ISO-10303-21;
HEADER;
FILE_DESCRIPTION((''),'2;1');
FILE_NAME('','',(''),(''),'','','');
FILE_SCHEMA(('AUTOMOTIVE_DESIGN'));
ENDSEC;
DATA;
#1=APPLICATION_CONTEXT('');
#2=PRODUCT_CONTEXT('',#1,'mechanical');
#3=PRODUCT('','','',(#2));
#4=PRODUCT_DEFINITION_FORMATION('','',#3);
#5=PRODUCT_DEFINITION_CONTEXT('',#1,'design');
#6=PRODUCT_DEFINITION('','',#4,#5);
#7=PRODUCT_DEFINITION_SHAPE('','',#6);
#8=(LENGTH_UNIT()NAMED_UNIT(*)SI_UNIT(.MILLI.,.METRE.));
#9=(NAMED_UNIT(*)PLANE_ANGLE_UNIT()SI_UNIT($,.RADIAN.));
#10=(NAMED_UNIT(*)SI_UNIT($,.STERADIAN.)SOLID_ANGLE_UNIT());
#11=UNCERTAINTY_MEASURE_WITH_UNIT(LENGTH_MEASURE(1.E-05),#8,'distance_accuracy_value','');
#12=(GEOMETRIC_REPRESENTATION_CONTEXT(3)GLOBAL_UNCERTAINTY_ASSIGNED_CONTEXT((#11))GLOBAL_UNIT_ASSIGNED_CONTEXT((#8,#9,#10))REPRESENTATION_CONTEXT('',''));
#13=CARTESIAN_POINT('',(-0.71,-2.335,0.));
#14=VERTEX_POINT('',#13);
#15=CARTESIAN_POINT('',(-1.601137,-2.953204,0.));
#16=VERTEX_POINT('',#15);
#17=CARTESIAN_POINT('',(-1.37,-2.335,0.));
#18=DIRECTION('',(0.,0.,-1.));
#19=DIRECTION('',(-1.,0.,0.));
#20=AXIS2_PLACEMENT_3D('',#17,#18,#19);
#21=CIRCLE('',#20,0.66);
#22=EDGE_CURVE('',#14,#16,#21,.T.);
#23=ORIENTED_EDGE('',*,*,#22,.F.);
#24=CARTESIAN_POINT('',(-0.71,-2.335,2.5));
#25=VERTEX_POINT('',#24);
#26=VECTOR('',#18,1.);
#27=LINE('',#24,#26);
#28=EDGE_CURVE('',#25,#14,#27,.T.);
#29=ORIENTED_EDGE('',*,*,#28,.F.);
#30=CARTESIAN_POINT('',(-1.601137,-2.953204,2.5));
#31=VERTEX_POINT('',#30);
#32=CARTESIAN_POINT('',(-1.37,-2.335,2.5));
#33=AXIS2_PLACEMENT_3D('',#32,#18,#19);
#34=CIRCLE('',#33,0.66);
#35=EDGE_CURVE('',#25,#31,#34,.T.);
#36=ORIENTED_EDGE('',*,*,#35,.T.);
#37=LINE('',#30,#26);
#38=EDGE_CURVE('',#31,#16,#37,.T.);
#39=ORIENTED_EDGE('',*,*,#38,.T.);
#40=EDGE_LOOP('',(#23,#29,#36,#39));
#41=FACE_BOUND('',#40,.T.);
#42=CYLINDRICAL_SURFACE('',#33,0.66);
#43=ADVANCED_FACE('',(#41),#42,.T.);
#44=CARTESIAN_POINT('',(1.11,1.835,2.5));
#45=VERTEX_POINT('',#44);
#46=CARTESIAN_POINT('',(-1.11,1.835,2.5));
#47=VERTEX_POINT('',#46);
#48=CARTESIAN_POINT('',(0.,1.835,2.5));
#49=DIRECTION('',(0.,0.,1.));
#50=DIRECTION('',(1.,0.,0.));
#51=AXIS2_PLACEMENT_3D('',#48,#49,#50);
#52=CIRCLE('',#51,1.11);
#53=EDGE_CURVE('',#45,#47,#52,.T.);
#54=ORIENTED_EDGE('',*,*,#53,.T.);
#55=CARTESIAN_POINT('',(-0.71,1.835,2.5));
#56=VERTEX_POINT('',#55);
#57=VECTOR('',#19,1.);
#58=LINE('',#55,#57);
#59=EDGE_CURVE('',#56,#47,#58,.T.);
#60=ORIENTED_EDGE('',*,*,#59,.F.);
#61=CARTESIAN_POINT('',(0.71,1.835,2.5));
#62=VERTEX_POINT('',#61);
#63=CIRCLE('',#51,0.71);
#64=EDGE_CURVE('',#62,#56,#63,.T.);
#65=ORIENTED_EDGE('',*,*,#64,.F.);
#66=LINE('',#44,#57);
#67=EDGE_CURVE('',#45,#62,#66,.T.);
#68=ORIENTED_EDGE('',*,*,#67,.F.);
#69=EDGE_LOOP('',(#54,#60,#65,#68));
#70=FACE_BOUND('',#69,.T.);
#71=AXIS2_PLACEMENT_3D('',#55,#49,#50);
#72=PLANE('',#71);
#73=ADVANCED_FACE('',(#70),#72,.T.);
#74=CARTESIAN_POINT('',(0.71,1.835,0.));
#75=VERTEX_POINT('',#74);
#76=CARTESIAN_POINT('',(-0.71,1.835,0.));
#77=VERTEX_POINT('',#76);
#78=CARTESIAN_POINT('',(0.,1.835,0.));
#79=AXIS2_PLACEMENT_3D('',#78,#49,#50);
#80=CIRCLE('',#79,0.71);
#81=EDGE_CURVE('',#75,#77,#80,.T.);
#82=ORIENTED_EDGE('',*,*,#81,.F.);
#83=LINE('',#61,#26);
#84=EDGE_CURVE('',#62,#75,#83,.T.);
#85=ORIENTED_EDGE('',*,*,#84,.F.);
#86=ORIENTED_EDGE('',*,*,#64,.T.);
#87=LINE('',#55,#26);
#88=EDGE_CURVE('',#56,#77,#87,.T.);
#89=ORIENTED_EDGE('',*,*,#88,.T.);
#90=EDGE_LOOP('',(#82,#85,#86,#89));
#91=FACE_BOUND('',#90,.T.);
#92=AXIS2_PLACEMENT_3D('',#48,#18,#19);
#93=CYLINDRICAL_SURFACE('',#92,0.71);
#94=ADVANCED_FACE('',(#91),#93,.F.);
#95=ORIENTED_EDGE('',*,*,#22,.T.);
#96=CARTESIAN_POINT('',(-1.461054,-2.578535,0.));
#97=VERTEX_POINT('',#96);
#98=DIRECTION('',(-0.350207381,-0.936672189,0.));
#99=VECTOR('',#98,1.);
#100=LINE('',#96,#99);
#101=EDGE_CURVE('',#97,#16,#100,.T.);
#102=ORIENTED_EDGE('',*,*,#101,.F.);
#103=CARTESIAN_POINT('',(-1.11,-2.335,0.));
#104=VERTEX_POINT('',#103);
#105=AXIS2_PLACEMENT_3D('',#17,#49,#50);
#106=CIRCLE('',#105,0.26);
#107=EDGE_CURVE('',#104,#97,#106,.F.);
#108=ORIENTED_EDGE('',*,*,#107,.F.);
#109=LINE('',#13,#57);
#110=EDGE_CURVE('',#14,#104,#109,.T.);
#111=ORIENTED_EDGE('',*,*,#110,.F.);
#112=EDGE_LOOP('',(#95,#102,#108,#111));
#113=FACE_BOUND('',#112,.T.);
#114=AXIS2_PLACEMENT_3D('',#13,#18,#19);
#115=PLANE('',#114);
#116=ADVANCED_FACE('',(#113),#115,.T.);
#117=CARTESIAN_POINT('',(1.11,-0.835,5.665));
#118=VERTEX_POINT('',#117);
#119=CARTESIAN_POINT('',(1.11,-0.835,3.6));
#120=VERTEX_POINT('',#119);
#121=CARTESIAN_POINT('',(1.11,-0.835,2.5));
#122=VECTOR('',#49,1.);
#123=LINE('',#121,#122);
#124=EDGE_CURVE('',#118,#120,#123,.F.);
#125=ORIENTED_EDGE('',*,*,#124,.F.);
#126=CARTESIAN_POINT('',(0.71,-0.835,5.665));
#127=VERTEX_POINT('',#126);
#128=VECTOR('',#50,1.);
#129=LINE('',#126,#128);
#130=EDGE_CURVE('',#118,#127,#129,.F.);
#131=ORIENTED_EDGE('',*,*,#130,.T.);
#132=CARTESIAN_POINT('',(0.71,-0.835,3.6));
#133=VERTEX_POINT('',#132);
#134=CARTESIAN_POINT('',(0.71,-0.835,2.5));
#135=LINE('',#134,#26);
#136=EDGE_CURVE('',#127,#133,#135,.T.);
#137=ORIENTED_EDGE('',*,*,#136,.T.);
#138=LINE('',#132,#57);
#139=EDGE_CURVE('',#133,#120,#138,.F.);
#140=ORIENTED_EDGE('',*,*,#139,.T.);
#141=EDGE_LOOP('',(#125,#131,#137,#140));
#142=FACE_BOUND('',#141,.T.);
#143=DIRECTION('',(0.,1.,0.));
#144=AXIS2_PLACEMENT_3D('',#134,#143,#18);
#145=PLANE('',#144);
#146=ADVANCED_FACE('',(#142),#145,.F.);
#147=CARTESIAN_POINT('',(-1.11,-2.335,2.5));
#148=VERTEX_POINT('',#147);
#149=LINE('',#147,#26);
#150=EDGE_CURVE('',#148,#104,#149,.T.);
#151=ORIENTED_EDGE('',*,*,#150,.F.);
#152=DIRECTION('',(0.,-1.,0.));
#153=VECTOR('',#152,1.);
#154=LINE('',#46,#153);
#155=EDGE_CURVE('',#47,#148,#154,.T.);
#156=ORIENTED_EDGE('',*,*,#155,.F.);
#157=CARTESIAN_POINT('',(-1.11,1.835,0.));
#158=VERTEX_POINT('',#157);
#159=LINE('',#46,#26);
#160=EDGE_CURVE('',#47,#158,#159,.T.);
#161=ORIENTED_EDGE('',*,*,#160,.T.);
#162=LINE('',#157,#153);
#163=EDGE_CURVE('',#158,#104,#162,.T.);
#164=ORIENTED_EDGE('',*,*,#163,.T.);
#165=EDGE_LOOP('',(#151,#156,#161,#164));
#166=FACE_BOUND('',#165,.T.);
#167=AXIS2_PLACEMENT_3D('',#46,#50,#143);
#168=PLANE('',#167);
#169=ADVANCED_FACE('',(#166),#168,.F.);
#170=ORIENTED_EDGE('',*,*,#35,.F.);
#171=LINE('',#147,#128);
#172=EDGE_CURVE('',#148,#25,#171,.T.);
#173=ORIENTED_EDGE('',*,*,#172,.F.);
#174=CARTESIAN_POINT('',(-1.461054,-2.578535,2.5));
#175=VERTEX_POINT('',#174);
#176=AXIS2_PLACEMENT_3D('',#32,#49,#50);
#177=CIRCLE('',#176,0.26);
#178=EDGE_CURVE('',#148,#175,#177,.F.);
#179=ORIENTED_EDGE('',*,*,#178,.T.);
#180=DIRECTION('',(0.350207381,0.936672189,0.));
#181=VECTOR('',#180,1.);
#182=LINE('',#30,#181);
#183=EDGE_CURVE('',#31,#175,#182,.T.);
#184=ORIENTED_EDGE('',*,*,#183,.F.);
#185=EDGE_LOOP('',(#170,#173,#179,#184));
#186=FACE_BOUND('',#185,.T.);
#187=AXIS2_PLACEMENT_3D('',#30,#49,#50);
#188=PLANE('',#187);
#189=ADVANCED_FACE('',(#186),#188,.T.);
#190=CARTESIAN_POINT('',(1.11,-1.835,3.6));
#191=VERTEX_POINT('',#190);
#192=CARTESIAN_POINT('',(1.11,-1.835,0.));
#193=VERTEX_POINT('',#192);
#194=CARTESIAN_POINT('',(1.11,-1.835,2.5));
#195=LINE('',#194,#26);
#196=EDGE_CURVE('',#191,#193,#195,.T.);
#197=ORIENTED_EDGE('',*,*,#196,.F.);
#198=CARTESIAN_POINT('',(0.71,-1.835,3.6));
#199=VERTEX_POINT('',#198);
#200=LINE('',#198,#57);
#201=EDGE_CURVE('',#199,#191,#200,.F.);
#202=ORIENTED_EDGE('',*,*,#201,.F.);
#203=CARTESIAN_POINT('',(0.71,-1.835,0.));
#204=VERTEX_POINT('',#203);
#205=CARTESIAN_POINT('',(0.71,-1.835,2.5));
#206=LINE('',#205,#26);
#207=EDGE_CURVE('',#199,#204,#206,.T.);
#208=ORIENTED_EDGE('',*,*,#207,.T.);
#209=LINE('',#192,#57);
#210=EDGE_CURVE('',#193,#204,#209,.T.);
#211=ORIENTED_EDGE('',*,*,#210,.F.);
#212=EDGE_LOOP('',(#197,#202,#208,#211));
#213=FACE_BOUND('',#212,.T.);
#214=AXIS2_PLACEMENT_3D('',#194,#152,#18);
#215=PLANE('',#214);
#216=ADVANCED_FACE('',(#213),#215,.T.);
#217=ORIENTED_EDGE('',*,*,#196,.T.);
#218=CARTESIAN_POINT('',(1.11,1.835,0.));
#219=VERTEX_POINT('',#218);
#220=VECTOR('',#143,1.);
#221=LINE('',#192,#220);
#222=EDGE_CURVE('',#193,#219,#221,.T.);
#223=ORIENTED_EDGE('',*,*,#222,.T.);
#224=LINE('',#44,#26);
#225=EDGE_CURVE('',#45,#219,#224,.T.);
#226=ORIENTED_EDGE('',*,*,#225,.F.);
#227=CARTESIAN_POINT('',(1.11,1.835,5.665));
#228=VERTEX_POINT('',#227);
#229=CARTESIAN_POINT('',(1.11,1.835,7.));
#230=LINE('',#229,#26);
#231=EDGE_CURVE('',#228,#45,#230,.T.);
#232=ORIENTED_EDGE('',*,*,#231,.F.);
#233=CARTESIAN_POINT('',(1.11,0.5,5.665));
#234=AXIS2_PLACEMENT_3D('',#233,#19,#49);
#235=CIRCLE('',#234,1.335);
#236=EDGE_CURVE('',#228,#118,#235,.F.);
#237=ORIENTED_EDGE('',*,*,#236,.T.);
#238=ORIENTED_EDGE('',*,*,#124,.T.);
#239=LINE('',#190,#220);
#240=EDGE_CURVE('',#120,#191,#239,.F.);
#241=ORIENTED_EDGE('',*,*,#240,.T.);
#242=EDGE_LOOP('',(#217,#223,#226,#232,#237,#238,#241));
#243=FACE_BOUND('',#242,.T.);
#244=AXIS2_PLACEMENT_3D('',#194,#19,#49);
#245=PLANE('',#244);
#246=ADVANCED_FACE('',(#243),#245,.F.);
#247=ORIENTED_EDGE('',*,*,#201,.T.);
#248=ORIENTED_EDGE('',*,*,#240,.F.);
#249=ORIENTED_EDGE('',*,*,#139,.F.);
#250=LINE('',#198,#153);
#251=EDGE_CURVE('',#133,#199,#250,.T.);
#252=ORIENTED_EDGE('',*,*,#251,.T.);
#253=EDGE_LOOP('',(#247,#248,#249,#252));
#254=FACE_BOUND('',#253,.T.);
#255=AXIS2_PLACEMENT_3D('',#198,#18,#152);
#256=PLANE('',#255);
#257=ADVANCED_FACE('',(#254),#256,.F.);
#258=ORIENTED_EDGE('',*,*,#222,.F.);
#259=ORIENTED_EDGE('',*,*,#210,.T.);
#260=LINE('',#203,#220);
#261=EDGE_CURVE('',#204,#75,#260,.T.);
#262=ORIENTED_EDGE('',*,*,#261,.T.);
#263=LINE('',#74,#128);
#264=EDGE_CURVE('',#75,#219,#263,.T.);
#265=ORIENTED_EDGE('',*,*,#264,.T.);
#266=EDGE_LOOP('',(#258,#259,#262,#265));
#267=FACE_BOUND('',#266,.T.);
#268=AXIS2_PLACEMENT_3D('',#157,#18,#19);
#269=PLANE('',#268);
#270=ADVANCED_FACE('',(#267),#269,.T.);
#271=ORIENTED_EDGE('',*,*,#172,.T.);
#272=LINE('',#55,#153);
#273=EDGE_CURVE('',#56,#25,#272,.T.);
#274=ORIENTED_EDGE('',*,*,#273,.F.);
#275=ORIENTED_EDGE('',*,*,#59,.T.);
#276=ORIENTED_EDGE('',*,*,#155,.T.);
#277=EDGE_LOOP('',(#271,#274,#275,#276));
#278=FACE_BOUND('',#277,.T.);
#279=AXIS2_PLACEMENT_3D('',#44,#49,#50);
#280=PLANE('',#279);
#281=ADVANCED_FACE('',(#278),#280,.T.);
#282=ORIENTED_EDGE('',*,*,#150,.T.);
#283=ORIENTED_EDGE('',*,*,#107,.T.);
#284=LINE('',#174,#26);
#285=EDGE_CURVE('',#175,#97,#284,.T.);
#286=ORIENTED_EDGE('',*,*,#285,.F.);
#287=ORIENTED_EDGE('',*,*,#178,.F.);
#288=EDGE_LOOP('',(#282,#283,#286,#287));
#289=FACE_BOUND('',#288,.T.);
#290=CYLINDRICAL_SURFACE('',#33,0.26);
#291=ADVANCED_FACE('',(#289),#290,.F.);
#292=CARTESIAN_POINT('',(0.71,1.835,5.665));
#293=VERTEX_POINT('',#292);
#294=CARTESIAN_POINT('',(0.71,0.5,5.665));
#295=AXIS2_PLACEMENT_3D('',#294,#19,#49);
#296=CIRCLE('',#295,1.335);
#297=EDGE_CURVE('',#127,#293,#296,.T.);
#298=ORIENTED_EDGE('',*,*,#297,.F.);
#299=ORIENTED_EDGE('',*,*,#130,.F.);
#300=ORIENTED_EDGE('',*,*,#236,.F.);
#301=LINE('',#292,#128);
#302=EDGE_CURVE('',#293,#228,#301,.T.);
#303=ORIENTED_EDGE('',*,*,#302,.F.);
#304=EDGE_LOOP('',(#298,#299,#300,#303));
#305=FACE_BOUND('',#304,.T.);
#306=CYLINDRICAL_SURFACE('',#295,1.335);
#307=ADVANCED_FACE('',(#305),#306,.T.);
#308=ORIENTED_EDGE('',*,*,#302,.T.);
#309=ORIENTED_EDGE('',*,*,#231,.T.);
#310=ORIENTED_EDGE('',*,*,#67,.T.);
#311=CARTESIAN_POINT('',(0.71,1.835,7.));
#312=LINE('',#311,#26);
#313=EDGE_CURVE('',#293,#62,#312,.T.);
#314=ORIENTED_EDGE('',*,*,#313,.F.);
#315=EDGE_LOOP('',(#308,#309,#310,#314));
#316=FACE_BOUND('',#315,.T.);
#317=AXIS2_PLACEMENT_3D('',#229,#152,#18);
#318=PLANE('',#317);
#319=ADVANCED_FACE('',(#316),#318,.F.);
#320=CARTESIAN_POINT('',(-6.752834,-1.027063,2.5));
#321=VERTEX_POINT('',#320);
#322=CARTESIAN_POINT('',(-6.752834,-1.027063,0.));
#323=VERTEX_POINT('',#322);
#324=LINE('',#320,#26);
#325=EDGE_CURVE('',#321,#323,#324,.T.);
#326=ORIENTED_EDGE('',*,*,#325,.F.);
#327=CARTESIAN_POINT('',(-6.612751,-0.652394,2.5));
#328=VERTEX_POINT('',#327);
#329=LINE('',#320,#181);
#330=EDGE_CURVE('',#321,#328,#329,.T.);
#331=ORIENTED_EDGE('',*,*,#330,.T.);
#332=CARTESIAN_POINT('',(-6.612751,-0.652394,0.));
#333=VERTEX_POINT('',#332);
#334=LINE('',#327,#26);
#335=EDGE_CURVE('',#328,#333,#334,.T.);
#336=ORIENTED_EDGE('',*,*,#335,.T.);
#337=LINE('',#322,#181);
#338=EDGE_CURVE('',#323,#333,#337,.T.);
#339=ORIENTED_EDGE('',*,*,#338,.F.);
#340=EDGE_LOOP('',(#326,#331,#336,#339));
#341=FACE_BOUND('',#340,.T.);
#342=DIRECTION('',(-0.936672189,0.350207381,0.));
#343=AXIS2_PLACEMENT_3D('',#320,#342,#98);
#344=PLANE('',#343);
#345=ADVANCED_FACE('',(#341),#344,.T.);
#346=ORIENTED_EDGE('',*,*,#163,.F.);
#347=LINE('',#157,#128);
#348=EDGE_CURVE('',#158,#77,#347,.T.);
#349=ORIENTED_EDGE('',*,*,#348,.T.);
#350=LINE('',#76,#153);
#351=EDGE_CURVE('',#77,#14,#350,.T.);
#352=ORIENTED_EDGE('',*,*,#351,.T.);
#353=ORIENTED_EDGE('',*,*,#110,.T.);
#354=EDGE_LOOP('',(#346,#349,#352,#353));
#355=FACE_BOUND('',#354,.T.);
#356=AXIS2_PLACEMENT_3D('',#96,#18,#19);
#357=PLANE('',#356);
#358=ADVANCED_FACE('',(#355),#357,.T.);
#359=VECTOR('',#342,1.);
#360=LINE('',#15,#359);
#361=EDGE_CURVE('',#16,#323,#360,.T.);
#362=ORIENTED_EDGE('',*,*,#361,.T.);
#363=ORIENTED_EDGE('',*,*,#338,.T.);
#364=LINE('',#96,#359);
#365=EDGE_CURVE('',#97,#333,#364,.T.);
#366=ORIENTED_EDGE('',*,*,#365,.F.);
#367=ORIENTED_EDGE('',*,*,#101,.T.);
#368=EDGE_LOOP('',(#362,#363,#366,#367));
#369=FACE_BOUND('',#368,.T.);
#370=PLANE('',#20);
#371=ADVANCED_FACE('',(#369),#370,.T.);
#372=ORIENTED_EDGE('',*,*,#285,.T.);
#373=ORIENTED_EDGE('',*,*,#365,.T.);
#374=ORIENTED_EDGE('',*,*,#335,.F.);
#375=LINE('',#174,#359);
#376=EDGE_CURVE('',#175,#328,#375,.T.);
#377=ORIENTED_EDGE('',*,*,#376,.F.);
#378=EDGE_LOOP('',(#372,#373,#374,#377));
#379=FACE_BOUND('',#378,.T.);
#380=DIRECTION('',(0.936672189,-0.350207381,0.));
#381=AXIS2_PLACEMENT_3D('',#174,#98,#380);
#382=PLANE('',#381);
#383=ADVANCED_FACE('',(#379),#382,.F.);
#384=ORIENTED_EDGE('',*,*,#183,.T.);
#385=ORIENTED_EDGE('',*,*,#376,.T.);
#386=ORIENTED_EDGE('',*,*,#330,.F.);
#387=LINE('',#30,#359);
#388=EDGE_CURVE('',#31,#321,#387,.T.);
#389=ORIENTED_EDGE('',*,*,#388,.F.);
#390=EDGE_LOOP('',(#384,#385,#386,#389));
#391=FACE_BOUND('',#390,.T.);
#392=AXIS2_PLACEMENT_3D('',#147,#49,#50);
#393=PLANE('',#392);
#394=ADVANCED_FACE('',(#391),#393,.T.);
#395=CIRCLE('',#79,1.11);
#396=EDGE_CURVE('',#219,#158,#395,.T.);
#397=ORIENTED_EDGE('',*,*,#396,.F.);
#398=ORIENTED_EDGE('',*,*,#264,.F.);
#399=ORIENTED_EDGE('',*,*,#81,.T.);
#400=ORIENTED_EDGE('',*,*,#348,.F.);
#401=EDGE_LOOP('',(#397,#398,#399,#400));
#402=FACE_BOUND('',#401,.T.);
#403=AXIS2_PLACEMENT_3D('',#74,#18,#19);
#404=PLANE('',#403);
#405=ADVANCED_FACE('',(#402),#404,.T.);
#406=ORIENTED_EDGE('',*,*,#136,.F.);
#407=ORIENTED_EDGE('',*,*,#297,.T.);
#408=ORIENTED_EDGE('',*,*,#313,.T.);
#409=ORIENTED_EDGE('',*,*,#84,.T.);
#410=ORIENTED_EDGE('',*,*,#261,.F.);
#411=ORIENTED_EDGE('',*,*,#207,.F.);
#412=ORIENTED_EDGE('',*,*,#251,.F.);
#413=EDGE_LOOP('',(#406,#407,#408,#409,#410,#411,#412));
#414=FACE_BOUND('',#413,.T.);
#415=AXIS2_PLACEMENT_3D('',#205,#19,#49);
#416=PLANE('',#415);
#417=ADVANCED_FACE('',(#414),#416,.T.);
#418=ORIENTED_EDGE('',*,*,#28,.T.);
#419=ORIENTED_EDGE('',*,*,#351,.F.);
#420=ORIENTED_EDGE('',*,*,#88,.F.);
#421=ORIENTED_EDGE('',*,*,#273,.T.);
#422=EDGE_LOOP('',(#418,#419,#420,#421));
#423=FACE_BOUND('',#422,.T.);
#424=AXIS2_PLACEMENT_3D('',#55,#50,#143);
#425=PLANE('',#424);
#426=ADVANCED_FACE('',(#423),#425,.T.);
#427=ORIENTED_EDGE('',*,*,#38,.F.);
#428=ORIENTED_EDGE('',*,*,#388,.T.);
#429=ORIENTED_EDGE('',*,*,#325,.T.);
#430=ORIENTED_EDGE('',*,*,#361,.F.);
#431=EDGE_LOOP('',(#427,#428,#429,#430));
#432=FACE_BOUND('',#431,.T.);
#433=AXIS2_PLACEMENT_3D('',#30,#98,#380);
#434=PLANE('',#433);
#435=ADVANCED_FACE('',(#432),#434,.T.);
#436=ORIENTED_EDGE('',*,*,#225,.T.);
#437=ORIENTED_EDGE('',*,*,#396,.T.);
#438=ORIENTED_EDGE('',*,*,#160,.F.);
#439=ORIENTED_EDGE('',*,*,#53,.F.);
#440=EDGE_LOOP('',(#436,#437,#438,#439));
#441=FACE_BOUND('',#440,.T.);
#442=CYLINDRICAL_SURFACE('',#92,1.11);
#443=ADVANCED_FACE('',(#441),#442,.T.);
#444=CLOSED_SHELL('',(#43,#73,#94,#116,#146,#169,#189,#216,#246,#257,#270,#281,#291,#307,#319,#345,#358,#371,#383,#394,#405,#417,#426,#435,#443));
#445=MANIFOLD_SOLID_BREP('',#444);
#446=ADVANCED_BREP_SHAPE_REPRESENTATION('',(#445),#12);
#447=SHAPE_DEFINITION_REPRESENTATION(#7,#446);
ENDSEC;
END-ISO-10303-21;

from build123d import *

# Parameters (mm, degrees)
BASE_FLANGE1_DEPTH  = 2.5
SKETCH8_W           = 0.4
SKETCH8_H           = 3.67
BOSS_EXTRUDE1_DEPTH = 4.5
SKETCH9_W           = 3.4
SKETCH9_H           = 1
CUT_EXTRUDE1_DEPTH  = 11.945052861
FILLET1_RADIUS      = 1.335
FILLET1_LENGTH      = 0.4


# Sheet-metal steps are written as plain solids
with BuildPart() as part:
    # Sketch3 → Base-Flange1 (new body)
    with BuildSketch(Plane.XY):
        with BuildLine():
            Line((0.71, -1.835), (0.71, 1.835))
            ThreePointArc((0.71, 1.835), (0, 2.545), (-0.71, 1.835))
            Line((-0.71, 1.835), (-0.71, -2.335))
            ThreePointArc((-0.71, -2.335), (-0.993802137, -2.877286979), (-1.601136872, -2.953203645))
            Line((-1.601136872, -2.953203645), (-6.752833912, -1.027063048))
            Line((-6.752833912, -1.027063048), (-6.61275096, -0.652394172))
            Line((-6.61275096, -0.652394172), (-1.461053919, -2.578534769))
            ThreePointArc((-1.461053919, -2.578534769), (-1.221800842, -2.548628204), (-1.11, -2.335))
            Line((-1.11, -2.335), (-1.11, 1.835))
            ThreePointArc((-1.11, 1.835), (0, 2.945), (1.11, 1.835))
            Line((1.11, 1.835), (1.11, -1.835))
            Line((1.11, -1.835), (0.71, -1.835))
        make_face()
    extrude(amount=BASE_FLANGE1_DEPTH)

    # Sketch8 → Boss-Extrude1 (add)
    with BuildSketch(Plane.XY.offset(2.5)):
        with Locations((0.91, 0)):
            Rectangle(SKETCH8_W, SKETCH8_H)
    extrude(amount=BOSS_EXTRUDE1_DEPTH)

    # Sketch9 → Cut-Extrude1 (cut, through all)
    with BuildSketch(Plane(origin=(1.11, 0, 0), x_dir=(0, 0, -1), z_dir=(1, 0, 0))):
        with Locations((-5.3, -1.335)):
            Rectangle(SKETCH9_W, SKETCH9_H)
    extrude(amount=-CUT_EXTRUDE1_DEPTH, mode=Mode.SUBTRACT)

    # Fillet1: full round fillet: the end face becomes a half cylinder, R = half its width
    fillet1_face = Plane((0.91, 0.5, 7), x_dir=(-1, 0, 0), z_dir=(0, 0, 1))  # on the end face: x along it, z out of the body
    fillet1_slab = fillet1_face.offset(-FILLET1_RADIUS / 2) * Box(FILLET1_LENGTH, 2 * FILLET1_RADIUS, FILLET1_RADIUS, mode=Mode.PRIVATE)  # the body's end, R deep
    fillet1_round = Plane((0.91, 0.5, 5.665), x_dir=(0, 0, 1), z_dir=(-1, 0, 0)) * Cylinder(FILLET1_RADIUS, FILLET1_LENGTH, mode=Mode.PRIVATE)  # its axis R under the face
    add(fillet1_slab - fillet1_round, mode=Mode.SUBTRACT)


solid = part.part
